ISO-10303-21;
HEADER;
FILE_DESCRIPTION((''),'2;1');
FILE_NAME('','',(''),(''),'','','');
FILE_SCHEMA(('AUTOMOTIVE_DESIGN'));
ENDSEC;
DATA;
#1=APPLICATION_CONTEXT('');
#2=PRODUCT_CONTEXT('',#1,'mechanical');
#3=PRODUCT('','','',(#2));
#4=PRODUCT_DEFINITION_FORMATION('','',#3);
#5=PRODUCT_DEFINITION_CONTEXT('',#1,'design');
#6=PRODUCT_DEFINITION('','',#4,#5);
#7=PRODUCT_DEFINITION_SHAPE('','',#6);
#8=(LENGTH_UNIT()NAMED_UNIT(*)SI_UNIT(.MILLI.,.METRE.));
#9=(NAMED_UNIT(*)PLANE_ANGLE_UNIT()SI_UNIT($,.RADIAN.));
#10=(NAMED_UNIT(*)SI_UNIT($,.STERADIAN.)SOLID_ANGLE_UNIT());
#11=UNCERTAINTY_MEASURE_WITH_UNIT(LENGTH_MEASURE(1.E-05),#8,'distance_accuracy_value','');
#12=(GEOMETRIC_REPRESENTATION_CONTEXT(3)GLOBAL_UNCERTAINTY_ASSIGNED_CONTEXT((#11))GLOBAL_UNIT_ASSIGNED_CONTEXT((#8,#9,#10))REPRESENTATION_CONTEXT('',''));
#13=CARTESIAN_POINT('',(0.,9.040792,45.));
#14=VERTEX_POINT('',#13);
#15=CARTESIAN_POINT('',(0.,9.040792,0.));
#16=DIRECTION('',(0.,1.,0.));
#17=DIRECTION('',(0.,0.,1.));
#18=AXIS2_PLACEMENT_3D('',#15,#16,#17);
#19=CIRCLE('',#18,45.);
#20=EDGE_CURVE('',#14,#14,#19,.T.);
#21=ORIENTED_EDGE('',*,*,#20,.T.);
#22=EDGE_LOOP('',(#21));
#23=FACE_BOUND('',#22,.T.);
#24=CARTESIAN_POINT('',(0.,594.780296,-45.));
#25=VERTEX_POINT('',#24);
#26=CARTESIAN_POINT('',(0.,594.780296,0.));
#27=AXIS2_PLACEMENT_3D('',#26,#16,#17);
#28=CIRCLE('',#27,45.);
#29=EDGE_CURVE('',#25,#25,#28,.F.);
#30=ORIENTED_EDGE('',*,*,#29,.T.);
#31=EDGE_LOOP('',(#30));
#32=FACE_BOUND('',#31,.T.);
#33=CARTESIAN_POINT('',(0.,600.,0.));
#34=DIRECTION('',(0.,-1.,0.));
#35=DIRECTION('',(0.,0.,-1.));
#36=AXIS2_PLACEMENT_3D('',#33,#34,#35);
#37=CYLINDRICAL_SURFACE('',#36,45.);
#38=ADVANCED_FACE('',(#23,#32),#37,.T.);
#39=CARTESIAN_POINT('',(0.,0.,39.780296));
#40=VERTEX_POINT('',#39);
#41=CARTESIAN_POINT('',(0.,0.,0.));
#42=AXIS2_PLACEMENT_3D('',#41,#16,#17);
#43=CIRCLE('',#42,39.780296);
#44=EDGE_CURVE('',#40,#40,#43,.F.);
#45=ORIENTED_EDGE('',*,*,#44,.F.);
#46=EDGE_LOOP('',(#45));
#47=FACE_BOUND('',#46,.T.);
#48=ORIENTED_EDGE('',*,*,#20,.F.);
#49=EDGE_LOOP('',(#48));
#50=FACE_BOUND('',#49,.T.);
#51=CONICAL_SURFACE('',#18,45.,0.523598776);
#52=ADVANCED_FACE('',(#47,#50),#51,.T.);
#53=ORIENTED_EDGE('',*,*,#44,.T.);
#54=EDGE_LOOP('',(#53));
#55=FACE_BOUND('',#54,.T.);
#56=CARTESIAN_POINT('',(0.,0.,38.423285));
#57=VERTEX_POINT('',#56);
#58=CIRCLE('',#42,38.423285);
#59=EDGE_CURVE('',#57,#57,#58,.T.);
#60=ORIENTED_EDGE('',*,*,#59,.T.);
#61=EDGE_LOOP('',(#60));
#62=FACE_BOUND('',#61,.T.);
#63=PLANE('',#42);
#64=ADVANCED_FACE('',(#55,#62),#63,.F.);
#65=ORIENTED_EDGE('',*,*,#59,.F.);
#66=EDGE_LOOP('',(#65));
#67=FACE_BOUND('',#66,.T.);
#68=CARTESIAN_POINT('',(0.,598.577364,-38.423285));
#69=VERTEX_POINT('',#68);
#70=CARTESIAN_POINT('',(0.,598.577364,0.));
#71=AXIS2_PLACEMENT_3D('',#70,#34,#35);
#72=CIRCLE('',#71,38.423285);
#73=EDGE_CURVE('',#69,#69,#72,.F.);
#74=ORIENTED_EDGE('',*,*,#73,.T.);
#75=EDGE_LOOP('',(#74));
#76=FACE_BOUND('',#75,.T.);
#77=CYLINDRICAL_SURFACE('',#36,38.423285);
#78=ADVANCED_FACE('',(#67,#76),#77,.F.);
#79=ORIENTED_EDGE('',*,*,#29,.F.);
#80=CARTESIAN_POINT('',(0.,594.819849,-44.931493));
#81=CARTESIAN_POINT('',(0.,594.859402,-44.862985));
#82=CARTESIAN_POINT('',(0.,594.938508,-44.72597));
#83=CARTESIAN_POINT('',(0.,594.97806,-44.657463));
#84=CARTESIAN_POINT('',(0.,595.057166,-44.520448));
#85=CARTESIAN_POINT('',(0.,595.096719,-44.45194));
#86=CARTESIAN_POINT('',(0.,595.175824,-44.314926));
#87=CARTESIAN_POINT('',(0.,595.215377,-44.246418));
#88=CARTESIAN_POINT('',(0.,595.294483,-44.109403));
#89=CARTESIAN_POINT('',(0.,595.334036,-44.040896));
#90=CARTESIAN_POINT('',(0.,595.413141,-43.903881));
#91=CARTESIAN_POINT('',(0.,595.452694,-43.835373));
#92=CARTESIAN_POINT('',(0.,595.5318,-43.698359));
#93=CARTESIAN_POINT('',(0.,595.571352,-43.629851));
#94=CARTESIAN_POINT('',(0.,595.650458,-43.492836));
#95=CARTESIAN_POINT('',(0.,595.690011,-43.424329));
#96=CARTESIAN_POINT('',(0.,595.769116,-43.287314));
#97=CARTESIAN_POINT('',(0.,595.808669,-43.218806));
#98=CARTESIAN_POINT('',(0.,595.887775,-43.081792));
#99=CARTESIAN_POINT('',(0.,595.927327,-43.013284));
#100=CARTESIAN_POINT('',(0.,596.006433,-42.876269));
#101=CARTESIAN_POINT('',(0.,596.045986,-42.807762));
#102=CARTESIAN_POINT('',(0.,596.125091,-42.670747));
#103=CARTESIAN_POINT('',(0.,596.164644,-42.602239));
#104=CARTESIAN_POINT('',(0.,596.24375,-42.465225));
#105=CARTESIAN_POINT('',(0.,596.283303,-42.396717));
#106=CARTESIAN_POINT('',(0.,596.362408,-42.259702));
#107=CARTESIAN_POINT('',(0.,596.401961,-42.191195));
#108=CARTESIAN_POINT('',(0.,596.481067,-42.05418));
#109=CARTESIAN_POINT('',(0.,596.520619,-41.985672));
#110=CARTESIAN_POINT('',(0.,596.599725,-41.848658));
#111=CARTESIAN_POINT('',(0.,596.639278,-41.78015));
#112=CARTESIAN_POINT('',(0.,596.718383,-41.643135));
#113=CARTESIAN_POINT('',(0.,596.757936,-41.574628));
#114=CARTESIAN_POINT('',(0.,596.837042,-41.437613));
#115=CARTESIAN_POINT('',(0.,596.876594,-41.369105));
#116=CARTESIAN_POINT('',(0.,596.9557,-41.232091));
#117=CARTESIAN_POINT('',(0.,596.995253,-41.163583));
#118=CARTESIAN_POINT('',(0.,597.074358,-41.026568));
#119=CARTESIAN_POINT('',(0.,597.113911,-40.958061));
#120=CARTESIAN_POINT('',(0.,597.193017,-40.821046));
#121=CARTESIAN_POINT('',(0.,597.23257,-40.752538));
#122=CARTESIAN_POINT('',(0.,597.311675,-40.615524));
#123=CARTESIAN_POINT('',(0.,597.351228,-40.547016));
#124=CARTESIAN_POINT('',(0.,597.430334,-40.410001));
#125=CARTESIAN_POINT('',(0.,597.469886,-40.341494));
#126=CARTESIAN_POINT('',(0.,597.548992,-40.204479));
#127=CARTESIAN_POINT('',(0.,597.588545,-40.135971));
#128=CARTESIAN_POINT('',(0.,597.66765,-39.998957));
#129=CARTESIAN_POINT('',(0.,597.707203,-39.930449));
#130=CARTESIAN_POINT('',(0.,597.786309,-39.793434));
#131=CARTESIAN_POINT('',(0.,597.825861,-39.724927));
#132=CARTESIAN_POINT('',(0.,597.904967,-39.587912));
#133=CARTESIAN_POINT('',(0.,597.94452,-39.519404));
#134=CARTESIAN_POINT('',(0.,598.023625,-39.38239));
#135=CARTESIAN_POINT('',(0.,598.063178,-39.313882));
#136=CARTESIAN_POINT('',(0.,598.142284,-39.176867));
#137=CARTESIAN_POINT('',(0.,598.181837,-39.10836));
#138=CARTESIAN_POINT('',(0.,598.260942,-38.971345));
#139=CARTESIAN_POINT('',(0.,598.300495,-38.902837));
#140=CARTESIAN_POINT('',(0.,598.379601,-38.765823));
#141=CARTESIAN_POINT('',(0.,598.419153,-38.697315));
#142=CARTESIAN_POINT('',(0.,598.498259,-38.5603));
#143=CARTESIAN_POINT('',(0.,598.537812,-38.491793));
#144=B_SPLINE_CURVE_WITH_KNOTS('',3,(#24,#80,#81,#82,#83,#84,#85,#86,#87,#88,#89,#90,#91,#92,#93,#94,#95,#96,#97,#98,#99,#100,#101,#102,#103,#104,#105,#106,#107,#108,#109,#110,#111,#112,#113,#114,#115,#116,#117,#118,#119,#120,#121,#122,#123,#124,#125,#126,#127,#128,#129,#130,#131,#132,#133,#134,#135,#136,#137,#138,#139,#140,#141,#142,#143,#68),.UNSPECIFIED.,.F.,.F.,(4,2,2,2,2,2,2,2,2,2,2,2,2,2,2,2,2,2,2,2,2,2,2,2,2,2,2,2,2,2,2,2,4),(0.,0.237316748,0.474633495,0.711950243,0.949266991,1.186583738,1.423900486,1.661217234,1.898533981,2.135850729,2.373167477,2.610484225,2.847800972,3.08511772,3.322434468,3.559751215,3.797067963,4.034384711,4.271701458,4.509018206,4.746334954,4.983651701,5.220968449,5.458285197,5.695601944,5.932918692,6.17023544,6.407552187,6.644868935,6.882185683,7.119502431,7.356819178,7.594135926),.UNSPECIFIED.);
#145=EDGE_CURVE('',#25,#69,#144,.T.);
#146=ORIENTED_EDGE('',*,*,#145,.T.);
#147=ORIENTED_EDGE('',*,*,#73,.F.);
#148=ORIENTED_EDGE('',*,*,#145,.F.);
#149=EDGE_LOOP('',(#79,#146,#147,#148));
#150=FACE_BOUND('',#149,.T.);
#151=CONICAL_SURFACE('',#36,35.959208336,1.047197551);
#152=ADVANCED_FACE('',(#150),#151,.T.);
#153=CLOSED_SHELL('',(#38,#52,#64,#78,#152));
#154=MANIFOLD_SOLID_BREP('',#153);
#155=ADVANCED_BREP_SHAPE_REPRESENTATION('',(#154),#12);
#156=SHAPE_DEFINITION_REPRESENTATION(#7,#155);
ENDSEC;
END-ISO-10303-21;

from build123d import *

# Parameters (mm, degrees)
SKETCH1_R           = 45
BOSS_EXTRUDE1_DEPTH = 600
SKETCH2_R           = 38.423285368
CUT_EXTRUDE1_DEPTH  = 604.365560834
CHAMFER1_SIZE       = 5.219704
CHAMFER1_SIZE_2     = 9.040792


with BuildPart() as part:
    # Sketch1 → Boss-Extrude1 (new body)
    with BuildSketch(Plane(origin=(0, 0, 0), x_dir=(1, 0, 0), z_dir=(0, 1, 0))):
        with Locations(Location((0, 0, 0), (0, 0, 270))):
            Circle(SKETCH1_R)
    extrude(amount=BOSS_EXTRUDE1_DEPTH)

    # Sketch2 → Cut-Extrude1 (cut, through all)
    with BuildSketch(Plane(origin=(0, 0, 0), x_dir=(1, 0, 0), z_dir=(0, 1, 0))):
        with Locations(Location((0, 0, 0), (0, 0, 270))):
            Circle(SKETCH2_R)
    extrude(amount=CUT_EXTRUDE1_DEPTH, mode=Mode.SUBTRACT)

    # Chamfer1
    # the kernel refuses this chamfer: 9.040792, 5.219704 mm, written as the material it takes off along each edge
    with BuildSketch(Plane(origin=(0, 600, 0), x_dir=(0, 0, 1), z_dir=(-1, 0, 0))) as chamfer1_piece_1:
        Polygon((45, -CHAMFER1_SIZE), (45 - CHAMFER1_SIZE_2, 0), (45, 0), align=None)
    revolve(axis=Axis((0, 600, 0), (0, 1, 0)), mode=Mode.SUBTRACT)
    with BuildSketch(Plane(origin=(0, 0, 0), x_dir=(0, 0, 1), z_dir=(-1, 0, 0))) as chamfer1_piece_2:
        Polygon((45, CHAMFER1_SIZE_2), (45 - CHAMFER1_SIZE, 0), (45, 0), align=None)
    revolve(axis=Axis((0, 0, 0), (0, 1, 0)), mode=Mode.SUBTRACT)


solid = part.part
